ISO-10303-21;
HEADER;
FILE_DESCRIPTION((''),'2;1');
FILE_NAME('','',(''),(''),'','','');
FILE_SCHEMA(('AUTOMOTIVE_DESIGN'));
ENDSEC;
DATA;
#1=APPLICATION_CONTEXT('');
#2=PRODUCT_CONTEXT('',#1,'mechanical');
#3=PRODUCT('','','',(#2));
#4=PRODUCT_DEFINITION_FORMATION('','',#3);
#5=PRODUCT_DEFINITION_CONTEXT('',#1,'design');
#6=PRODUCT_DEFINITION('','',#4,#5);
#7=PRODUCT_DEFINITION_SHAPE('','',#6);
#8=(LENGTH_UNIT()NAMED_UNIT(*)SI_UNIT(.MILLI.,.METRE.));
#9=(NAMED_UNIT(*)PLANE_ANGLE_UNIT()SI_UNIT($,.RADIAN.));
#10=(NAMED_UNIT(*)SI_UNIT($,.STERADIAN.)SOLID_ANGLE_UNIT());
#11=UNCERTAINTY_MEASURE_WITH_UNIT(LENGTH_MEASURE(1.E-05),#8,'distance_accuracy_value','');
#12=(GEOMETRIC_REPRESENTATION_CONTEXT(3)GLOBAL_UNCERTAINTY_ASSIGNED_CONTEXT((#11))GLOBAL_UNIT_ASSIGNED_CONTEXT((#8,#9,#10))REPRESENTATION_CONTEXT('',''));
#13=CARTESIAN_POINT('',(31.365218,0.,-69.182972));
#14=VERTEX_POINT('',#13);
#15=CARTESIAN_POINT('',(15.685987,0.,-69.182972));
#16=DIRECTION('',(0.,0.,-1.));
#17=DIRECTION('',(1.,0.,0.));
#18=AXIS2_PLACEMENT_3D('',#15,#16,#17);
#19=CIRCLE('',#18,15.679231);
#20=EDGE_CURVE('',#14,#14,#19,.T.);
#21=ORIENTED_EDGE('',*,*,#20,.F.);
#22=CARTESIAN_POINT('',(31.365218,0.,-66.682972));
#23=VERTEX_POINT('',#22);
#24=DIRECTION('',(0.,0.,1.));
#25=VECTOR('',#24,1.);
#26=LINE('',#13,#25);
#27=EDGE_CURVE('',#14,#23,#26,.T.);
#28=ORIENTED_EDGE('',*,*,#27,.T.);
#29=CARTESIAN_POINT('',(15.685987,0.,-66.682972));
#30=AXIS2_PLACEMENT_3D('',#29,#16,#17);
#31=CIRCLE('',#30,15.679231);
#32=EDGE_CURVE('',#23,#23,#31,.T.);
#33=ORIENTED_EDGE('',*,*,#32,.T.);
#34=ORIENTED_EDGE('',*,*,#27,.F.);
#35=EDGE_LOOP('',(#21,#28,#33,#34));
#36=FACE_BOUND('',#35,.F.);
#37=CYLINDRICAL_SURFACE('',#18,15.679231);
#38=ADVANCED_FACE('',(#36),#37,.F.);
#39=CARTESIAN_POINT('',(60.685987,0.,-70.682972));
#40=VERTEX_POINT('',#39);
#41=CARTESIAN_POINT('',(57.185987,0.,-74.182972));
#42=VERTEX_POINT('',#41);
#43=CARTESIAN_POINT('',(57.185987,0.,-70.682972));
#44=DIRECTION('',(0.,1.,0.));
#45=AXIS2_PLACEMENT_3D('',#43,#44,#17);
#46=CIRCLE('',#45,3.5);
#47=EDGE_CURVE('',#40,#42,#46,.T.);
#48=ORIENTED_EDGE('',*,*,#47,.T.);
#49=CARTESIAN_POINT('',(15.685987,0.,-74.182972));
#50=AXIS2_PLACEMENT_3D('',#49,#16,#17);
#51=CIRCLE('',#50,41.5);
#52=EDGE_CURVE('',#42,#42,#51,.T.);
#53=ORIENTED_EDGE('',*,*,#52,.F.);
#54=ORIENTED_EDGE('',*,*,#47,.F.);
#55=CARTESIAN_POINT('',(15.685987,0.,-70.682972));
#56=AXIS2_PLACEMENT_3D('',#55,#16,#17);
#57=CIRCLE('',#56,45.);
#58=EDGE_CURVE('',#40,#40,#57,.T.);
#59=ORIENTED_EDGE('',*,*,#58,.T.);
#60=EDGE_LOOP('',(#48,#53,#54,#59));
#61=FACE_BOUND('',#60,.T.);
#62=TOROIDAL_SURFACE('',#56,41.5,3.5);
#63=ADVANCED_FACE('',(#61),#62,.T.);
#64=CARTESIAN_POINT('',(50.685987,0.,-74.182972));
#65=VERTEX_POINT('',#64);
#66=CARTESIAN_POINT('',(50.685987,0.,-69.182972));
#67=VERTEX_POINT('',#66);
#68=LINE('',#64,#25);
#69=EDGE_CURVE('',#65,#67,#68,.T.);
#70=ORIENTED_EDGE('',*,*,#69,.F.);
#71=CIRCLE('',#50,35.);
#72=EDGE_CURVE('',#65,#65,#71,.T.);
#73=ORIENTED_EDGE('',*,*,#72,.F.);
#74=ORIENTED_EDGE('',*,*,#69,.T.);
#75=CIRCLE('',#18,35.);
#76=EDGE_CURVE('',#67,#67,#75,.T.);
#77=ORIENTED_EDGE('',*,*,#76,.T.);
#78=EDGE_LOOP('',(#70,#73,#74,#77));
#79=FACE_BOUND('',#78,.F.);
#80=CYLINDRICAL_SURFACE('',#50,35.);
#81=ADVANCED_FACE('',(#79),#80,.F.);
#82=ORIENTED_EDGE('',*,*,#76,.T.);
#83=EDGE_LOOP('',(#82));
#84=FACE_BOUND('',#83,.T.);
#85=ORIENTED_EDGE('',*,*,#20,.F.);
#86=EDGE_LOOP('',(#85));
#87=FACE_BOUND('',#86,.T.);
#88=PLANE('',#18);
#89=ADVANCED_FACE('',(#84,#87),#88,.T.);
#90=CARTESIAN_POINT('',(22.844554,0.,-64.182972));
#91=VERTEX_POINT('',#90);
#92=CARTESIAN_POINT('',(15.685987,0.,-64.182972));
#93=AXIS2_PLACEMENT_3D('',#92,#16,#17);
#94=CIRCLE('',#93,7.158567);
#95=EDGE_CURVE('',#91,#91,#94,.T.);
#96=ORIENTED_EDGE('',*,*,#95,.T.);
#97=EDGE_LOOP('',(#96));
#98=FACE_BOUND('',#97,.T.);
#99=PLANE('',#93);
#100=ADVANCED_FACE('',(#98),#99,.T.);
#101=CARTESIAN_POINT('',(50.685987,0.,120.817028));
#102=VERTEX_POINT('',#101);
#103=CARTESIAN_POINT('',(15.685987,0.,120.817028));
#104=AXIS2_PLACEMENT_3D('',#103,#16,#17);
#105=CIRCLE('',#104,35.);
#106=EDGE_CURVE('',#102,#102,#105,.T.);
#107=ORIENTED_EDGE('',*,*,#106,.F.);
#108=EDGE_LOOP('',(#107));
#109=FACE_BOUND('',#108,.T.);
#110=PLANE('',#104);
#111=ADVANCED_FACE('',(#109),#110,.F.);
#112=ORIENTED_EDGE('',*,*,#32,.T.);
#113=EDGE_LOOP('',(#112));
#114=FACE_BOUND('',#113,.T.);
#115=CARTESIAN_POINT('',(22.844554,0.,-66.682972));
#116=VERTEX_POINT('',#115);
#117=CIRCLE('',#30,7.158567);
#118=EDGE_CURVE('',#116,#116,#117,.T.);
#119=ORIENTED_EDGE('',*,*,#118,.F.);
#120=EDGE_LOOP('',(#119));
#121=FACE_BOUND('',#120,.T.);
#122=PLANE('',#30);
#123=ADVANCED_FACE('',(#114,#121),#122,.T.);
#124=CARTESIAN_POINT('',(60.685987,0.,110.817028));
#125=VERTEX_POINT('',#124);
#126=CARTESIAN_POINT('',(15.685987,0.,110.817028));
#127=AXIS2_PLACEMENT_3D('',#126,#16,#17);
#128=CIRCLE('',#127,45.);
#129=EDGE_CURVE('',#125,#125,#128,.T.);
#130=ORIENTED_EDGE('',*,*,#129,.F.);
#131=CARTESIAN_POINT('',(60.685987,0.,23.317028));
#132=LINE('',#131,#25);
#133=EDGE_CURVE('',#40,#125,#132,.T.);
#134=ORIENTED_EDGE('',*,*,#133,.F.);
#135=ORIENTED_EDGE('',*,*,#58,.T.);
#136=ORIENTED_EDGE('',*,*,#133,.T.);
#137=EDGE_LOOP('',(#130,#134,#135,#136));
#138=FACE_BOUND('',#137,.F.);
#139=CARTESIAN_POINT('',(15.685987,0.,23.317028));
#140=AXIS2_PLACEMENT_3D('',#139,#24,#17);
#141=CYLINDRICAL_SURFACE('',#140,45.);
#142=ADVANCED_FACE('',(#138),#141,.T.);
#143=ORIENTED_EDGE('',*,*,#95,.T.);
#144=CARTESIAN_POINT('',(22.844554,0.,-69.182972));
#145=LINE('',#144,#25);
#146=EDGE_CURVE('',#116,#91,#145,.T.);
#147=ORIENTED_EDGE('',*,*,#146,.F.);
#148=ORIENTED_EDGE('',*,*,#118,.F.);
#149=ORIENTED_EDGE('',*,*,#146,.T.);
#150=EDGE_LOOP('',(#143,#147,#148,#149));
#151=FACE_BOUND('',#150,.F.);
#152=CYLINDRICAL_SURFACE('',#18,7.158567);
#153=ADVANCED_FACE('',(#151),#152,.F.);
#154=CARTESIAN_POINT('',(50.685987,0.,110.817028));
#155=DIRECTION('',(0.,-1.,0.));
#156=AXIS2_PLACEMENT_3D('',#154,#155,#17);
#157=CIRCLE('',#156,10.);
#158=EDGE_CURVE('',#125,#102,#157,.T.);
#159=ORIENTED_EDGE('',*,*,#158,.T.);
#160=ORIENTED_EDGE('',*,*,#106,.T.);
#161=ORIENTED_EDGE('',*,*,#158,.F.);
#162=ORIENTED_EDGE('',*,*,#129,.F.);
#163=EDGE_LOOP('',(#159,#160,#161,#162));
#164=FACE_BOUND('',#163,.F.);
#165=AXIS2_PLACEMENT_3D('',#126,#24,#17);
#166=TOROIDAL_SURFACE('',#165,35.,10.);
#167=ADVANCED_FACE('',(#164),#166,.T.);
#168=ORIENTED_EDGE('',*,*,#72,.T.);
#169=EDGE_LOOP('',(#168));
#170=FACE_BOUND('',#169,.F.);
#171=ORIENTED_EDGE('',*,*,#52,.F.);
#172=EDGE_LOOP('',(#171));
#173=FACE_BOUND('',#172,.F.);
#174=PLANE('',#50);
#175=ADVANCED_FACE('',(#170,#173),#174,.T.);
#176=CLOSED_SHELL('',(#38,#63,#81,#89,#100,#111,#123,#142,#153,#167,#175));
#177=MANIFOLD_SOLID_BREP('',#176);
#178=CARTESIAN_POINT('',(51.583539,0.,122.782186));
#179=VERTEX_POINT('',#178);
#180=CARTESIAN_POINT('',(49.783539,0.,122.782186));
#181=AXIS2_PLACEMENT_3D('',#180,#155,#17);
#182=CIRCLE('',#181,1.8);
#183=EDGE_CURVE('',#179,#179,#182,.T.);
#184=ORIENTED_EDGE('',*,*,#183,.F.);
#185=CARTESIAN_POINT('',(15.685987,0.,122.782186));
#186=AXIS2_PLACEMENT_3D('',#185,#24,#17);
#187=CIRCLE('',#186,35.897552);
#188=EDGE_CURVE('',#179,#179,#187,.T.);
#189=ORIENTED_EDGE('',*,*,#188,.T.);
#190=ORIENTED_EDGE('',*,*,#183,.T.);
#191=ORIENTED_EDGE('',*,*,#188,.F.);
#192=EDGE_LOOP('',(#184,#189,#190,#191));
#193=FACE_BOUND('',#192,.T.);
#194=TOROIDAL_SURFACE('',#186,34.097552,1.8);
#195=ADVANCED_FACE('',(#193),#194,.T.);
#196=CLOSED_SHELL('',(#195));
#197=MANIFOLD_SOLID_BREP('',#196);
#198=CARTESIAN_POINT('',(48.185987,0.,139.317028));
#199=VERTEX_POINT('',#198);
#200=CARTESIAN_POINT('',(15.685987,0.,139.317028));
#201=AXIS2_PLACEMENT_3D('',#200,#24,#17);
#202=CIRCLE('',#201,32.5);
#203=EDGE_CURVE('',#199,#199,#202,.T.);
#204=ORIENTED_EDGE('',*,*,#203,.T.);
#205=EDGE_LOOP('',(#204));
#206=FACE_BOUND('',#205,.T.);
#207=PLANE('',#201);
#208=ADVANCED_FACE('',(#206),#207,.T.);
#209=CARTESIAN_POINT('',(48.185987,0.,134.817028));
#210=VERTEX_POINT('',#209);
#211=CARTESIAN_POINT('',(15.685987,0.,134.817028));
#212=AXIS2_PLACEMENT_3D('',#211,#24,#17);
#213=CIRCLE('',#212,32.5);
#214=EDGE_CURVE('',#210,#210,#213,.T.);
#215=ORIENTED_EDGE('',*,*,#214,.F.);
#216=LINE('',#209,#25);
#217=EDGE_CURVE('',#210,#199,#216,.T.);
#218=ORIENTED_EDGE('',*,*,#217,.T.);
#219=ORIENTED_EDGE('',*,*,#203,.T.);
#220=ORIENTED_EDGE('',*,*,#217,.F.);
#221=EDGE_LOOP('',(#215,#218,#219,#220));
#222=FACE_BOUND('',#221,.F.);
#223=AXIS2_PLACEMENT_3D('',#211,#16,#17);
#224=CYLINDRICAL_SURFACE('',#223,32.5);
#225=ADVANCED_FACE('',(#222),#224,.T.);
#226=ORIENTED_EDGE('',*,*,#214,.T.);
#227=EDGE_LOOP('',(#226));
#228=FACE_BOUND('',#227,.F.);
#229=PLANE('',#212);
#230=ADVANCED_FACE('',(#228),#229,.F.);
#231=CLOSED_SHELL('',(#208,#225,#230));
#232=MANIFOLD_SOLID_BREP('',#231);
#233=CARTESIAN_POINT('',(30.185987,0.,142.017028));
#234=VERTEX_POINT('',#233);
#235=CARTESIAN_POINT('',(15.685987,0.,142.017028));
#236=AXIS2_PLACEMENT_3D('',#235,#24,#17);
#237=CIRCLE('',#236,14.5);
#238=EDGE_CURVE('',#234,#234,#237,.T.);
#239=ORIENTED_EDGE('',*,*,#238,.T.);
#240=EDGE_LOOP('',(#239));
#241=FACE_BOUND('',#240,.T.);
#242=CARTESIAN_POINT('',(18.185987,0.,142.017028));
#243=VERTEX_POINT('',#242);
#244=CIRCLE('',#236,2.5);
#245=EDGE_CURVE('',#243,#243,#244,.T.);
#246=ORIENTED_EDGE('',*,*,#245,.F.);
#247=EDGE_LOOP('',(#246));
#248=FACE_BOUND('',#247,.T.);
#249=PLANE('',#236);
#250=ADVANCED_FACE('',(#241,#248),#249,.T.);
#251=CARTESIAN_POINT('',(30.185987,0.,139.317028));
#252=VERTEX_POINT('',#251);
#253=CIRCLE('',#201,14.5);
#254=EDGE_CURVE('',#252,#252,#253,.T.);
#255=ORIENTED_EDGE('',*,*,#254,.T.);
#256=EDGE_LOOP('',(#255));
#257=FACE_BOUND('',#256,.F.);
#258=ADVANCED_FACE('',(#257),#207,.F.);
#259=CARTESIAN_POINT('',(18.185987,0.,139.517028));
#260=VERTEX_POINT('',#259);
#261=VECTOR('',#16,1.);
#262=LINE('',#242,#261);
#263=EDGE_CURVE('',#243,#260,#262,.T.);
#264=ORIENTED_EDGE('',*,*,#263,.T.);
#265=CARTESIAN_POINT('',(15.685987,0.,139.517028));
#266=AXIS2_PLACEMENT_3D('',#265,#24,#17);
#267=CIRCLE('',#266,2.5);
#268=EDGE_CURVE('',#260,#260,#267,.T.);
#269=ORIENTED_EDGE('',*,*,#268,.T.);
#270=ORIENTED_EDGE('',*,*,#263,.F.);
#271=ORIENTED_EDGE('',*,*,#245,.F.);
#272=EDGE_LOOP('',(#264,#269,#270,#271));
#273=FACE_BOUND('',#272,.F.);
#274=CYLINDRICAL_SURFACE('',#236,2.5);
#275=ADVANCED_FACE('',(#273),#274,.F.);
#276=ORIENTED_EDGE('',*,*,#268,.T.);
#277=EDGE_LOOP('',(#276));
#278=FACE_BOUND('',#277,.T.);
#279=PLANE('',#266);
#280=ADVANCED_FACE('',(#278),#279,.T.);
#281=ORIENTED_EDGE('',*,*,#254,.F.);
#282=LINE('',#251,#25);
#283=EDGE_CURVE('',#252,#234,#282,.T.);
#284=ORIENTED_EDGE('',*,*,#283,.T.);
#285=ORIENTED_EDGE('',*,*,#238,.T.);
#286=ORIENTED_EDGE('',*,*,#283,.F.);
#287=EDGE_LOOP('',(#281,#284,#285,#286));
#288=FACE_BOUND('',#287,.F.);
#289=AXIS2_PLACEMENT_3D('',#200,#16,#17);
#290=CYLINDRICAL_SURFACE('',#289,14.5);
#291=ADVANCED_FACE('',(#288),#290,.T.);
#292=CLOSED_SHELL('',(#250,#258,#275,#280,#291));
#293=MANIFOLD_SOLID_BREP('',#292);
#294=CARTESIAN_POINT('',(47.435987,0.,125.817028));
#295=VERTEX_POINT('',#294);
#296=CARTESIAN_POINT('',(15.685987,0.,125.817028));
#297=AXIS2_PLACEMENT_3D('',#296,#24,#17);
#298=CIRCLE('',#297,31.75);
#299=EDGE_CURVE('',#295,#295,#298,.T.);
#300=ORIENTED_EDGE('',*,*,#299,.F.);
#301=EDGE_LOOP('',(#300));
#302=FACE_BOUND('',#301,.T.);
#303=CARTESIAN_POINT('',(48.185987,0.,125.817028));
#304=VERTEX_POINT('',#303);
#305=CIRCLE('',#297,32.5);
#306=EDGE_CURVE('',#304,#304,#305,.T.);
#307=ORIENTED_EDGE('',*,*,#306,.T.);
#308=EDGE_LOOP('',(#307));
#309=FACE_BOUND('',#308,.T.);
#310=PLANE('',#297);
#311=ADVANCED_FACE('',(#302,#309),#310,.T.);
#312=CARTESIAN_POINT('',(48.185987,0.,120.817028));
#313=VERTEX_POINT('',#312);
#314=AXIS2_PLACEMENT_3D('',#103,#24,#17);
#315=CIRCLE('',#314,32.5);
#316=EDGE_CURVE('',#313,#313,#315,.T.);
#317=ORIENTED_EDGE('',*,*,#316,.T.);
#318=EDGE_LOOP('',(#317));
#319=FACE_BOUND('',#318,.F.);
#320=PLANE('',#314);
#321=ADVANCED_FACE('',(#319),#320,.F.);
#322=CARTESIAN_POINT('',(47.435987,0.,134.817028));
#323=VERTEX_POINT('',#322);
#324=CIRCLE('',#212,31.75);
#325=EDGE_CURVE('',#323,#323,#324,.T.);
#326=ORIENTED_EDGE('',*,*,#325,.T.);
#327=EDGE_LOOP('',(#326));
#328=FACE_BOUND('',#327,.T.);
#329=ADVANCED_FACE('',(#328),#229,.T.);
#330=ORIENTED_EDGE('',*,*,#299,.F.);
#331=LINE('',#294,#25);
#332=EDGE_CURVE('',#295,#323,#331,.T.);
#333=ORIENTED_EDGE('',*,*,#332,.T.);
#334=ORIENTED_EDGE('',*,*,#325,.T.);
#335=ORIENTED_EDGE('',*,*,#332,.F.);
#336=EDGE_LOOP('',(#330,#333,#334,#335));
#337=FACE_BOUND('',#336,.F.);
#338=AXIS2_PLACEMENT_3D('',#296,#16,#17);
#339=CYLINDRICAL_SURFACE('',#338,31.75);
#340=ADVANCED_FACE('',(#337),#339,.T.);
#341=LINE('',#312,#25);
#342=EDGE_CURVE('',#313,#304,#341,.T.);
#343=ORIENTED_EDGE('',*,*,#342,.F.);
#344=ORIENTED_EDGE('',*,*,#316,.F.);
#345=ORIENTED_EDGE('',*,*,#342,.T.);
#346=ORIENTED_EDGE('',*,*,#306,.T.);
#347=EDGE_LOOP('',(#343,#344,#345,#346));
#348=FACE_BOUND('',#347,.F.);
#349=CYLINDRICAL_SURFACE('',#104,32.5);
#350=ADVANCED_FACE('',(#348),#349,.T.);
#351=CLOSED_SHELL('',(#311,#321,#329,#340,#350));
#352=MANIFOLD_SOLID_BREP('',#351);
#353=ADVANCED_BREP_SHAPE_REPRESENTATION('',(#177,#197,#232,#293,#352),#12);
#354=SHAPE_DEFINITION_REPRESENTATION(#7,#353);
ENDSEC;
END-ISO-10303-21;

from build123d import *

# Parameters (mm, degrees)
F0_W      = 45
F0_H      = 195
F2_R      = 10
F3_R      = 35
F4_DEPTH  = 5
F5_R      = 7.1585667821
F6_DEPTH  = 5
F5_R_2    = 15.6792313498
F7_DEPTH  = 2.5
F8_R      = 1.8
F11_R     = 32.5
F12_DEPTH = 5
F13_R     = 31.75
F14_DEPTH = 9
F15_R     = 32.5
F16_DEPTH = 4.5
F17_R     = 14.5
F18_DEPTH = 2.7
F19_R     = 2.5
F20_DEPTH = 2.5
F21_R     = 3.5


# Not quite as in the source:
# - the program builds the solid bodies; features that only make, move or delete a surface that nothing else refers to are left out


with BuildPart() as f1:
    # F0 (on Front) → F1 (revolve)
    with BuildSketch(Plane.XZ):
        with Locations((38.1859867275, 23.317027688)):
            Rectangle(F0_W, F0_H)
    revolve(axis=Axis((15.6859867275, 0, 23.317027688), (0, 0, -1)))

    # F2
    f2_edges = [f1.edges().sort_by_distance(p)[0] for p in [
        (-29.314013, 0, 120.817028),
    ]]
    fillet(f2_edges, radius=F2_R)

    # F3 (on face) → F4 (cut)
    with BuildSketch(Plane(origin=(0, 0, -74.182972312), x_dir=(1, 0, 0), z_dir=(0, 0, -1))):
        with Locations((15.6859867275, 0)):
            Circle(F3_R)
    extrude(amount=-F4_DEPTH, mode=Mode.SUBTRACT)

    # F5 (on face) → F6 (cut)
    with BuildSketch(Plane(origin=(0, 0, -69.182972312), x_dir=(1, 0, 0), z_dir=(0, 0, -1))):
        with Locations((15.6859867275, 0)):
            Circle(F5_R)
    extrude(amount=-F6_DEPTH, mode=Mode.SUBTRACT)

    # F5 (on face) → F7 (cut)
    with BuildSketch(Plane(origin=(0, 0, -69.182972312), x_dir=(1, 0, 0), z_dir=(0, 0, -1))):
        with Locations((15.6859867275, 0)):
            Circle(F5_R_2)
        with Locations((15.6859867275, 0)):
            Circle(F5_R, mode=Mode.SUBTRACT)
    extrude(amount=-F7_DEPTH, mode=Mode.SUBTRACT)

    # F21
    f21_edges = [f1.edges().sort_by_distance(p)[0] for p in [
        (-29.314013, 0, -74.182972),
    ]]
    fillet(f21_edges, radius=F21_R)


with BuildPart() as f10:
    # F10: sweep along a path in F9
    with BuildLine(Plane.XY.offset(120.817027688)) as f10_path:
        CenterArc((15.6859867275, 0), 35, 0, 360)
    # F8 (on Front) → F10 (sweep)
    with BuildSketch(Plane.XZ):
        with Locations((49.783539027, 122.7821856737)):
            Circle(F8_R)
    sweep(path=f10_path.line)


with BuildPart() as f12:
    # F11 (on face) → F12 (new body)
    with BuildSketch(Plane.XY.offset(120.817027688)):
        with Locations((15.6859867275, 0)):
            Circle(F11_R)
    extrude(amount=F12_DEPTH)

    # F13 (on face) → F14 (join)
    with BuildSketch(Plane.XY.offset(125.817027688)):
        with Locations((15.6859867275, 0)):
            Circle(F13_R)
    extrude(amount=F14_DEPTH)


with BuildPart() as f16:
    # F15 (on face) → F16 (new body)
    with BuildSketch(Plane.XY.offset(134.817027688)):
        with Locations((15.6859867275, 0)):
            Circle(F15_R)
    extrude(amount=F16_DEPTH)


with BuildPart() as f18:
    # F17 (on face) → F18 (new body)
    with BuildSketch(Plane.XY.offset(139.317027688)):
        with Locations((15.6859867275, 0)):
            Circle(F17_R)
    extrude(amount=F18_DEPTH)

    # F19 (on face) → F20 (cut)
    with BuildSketch(Plane.XY.offset(142.017027688)):
        with Locations((15.6859867275, 0)):
            Circle(F19_R)
    extrude(amount=-F20_DEPTH, mode=Mode.SUBTRACT)


solid = Compound([f1.part, f10.part, f12.part, f16.part, f18.part])
